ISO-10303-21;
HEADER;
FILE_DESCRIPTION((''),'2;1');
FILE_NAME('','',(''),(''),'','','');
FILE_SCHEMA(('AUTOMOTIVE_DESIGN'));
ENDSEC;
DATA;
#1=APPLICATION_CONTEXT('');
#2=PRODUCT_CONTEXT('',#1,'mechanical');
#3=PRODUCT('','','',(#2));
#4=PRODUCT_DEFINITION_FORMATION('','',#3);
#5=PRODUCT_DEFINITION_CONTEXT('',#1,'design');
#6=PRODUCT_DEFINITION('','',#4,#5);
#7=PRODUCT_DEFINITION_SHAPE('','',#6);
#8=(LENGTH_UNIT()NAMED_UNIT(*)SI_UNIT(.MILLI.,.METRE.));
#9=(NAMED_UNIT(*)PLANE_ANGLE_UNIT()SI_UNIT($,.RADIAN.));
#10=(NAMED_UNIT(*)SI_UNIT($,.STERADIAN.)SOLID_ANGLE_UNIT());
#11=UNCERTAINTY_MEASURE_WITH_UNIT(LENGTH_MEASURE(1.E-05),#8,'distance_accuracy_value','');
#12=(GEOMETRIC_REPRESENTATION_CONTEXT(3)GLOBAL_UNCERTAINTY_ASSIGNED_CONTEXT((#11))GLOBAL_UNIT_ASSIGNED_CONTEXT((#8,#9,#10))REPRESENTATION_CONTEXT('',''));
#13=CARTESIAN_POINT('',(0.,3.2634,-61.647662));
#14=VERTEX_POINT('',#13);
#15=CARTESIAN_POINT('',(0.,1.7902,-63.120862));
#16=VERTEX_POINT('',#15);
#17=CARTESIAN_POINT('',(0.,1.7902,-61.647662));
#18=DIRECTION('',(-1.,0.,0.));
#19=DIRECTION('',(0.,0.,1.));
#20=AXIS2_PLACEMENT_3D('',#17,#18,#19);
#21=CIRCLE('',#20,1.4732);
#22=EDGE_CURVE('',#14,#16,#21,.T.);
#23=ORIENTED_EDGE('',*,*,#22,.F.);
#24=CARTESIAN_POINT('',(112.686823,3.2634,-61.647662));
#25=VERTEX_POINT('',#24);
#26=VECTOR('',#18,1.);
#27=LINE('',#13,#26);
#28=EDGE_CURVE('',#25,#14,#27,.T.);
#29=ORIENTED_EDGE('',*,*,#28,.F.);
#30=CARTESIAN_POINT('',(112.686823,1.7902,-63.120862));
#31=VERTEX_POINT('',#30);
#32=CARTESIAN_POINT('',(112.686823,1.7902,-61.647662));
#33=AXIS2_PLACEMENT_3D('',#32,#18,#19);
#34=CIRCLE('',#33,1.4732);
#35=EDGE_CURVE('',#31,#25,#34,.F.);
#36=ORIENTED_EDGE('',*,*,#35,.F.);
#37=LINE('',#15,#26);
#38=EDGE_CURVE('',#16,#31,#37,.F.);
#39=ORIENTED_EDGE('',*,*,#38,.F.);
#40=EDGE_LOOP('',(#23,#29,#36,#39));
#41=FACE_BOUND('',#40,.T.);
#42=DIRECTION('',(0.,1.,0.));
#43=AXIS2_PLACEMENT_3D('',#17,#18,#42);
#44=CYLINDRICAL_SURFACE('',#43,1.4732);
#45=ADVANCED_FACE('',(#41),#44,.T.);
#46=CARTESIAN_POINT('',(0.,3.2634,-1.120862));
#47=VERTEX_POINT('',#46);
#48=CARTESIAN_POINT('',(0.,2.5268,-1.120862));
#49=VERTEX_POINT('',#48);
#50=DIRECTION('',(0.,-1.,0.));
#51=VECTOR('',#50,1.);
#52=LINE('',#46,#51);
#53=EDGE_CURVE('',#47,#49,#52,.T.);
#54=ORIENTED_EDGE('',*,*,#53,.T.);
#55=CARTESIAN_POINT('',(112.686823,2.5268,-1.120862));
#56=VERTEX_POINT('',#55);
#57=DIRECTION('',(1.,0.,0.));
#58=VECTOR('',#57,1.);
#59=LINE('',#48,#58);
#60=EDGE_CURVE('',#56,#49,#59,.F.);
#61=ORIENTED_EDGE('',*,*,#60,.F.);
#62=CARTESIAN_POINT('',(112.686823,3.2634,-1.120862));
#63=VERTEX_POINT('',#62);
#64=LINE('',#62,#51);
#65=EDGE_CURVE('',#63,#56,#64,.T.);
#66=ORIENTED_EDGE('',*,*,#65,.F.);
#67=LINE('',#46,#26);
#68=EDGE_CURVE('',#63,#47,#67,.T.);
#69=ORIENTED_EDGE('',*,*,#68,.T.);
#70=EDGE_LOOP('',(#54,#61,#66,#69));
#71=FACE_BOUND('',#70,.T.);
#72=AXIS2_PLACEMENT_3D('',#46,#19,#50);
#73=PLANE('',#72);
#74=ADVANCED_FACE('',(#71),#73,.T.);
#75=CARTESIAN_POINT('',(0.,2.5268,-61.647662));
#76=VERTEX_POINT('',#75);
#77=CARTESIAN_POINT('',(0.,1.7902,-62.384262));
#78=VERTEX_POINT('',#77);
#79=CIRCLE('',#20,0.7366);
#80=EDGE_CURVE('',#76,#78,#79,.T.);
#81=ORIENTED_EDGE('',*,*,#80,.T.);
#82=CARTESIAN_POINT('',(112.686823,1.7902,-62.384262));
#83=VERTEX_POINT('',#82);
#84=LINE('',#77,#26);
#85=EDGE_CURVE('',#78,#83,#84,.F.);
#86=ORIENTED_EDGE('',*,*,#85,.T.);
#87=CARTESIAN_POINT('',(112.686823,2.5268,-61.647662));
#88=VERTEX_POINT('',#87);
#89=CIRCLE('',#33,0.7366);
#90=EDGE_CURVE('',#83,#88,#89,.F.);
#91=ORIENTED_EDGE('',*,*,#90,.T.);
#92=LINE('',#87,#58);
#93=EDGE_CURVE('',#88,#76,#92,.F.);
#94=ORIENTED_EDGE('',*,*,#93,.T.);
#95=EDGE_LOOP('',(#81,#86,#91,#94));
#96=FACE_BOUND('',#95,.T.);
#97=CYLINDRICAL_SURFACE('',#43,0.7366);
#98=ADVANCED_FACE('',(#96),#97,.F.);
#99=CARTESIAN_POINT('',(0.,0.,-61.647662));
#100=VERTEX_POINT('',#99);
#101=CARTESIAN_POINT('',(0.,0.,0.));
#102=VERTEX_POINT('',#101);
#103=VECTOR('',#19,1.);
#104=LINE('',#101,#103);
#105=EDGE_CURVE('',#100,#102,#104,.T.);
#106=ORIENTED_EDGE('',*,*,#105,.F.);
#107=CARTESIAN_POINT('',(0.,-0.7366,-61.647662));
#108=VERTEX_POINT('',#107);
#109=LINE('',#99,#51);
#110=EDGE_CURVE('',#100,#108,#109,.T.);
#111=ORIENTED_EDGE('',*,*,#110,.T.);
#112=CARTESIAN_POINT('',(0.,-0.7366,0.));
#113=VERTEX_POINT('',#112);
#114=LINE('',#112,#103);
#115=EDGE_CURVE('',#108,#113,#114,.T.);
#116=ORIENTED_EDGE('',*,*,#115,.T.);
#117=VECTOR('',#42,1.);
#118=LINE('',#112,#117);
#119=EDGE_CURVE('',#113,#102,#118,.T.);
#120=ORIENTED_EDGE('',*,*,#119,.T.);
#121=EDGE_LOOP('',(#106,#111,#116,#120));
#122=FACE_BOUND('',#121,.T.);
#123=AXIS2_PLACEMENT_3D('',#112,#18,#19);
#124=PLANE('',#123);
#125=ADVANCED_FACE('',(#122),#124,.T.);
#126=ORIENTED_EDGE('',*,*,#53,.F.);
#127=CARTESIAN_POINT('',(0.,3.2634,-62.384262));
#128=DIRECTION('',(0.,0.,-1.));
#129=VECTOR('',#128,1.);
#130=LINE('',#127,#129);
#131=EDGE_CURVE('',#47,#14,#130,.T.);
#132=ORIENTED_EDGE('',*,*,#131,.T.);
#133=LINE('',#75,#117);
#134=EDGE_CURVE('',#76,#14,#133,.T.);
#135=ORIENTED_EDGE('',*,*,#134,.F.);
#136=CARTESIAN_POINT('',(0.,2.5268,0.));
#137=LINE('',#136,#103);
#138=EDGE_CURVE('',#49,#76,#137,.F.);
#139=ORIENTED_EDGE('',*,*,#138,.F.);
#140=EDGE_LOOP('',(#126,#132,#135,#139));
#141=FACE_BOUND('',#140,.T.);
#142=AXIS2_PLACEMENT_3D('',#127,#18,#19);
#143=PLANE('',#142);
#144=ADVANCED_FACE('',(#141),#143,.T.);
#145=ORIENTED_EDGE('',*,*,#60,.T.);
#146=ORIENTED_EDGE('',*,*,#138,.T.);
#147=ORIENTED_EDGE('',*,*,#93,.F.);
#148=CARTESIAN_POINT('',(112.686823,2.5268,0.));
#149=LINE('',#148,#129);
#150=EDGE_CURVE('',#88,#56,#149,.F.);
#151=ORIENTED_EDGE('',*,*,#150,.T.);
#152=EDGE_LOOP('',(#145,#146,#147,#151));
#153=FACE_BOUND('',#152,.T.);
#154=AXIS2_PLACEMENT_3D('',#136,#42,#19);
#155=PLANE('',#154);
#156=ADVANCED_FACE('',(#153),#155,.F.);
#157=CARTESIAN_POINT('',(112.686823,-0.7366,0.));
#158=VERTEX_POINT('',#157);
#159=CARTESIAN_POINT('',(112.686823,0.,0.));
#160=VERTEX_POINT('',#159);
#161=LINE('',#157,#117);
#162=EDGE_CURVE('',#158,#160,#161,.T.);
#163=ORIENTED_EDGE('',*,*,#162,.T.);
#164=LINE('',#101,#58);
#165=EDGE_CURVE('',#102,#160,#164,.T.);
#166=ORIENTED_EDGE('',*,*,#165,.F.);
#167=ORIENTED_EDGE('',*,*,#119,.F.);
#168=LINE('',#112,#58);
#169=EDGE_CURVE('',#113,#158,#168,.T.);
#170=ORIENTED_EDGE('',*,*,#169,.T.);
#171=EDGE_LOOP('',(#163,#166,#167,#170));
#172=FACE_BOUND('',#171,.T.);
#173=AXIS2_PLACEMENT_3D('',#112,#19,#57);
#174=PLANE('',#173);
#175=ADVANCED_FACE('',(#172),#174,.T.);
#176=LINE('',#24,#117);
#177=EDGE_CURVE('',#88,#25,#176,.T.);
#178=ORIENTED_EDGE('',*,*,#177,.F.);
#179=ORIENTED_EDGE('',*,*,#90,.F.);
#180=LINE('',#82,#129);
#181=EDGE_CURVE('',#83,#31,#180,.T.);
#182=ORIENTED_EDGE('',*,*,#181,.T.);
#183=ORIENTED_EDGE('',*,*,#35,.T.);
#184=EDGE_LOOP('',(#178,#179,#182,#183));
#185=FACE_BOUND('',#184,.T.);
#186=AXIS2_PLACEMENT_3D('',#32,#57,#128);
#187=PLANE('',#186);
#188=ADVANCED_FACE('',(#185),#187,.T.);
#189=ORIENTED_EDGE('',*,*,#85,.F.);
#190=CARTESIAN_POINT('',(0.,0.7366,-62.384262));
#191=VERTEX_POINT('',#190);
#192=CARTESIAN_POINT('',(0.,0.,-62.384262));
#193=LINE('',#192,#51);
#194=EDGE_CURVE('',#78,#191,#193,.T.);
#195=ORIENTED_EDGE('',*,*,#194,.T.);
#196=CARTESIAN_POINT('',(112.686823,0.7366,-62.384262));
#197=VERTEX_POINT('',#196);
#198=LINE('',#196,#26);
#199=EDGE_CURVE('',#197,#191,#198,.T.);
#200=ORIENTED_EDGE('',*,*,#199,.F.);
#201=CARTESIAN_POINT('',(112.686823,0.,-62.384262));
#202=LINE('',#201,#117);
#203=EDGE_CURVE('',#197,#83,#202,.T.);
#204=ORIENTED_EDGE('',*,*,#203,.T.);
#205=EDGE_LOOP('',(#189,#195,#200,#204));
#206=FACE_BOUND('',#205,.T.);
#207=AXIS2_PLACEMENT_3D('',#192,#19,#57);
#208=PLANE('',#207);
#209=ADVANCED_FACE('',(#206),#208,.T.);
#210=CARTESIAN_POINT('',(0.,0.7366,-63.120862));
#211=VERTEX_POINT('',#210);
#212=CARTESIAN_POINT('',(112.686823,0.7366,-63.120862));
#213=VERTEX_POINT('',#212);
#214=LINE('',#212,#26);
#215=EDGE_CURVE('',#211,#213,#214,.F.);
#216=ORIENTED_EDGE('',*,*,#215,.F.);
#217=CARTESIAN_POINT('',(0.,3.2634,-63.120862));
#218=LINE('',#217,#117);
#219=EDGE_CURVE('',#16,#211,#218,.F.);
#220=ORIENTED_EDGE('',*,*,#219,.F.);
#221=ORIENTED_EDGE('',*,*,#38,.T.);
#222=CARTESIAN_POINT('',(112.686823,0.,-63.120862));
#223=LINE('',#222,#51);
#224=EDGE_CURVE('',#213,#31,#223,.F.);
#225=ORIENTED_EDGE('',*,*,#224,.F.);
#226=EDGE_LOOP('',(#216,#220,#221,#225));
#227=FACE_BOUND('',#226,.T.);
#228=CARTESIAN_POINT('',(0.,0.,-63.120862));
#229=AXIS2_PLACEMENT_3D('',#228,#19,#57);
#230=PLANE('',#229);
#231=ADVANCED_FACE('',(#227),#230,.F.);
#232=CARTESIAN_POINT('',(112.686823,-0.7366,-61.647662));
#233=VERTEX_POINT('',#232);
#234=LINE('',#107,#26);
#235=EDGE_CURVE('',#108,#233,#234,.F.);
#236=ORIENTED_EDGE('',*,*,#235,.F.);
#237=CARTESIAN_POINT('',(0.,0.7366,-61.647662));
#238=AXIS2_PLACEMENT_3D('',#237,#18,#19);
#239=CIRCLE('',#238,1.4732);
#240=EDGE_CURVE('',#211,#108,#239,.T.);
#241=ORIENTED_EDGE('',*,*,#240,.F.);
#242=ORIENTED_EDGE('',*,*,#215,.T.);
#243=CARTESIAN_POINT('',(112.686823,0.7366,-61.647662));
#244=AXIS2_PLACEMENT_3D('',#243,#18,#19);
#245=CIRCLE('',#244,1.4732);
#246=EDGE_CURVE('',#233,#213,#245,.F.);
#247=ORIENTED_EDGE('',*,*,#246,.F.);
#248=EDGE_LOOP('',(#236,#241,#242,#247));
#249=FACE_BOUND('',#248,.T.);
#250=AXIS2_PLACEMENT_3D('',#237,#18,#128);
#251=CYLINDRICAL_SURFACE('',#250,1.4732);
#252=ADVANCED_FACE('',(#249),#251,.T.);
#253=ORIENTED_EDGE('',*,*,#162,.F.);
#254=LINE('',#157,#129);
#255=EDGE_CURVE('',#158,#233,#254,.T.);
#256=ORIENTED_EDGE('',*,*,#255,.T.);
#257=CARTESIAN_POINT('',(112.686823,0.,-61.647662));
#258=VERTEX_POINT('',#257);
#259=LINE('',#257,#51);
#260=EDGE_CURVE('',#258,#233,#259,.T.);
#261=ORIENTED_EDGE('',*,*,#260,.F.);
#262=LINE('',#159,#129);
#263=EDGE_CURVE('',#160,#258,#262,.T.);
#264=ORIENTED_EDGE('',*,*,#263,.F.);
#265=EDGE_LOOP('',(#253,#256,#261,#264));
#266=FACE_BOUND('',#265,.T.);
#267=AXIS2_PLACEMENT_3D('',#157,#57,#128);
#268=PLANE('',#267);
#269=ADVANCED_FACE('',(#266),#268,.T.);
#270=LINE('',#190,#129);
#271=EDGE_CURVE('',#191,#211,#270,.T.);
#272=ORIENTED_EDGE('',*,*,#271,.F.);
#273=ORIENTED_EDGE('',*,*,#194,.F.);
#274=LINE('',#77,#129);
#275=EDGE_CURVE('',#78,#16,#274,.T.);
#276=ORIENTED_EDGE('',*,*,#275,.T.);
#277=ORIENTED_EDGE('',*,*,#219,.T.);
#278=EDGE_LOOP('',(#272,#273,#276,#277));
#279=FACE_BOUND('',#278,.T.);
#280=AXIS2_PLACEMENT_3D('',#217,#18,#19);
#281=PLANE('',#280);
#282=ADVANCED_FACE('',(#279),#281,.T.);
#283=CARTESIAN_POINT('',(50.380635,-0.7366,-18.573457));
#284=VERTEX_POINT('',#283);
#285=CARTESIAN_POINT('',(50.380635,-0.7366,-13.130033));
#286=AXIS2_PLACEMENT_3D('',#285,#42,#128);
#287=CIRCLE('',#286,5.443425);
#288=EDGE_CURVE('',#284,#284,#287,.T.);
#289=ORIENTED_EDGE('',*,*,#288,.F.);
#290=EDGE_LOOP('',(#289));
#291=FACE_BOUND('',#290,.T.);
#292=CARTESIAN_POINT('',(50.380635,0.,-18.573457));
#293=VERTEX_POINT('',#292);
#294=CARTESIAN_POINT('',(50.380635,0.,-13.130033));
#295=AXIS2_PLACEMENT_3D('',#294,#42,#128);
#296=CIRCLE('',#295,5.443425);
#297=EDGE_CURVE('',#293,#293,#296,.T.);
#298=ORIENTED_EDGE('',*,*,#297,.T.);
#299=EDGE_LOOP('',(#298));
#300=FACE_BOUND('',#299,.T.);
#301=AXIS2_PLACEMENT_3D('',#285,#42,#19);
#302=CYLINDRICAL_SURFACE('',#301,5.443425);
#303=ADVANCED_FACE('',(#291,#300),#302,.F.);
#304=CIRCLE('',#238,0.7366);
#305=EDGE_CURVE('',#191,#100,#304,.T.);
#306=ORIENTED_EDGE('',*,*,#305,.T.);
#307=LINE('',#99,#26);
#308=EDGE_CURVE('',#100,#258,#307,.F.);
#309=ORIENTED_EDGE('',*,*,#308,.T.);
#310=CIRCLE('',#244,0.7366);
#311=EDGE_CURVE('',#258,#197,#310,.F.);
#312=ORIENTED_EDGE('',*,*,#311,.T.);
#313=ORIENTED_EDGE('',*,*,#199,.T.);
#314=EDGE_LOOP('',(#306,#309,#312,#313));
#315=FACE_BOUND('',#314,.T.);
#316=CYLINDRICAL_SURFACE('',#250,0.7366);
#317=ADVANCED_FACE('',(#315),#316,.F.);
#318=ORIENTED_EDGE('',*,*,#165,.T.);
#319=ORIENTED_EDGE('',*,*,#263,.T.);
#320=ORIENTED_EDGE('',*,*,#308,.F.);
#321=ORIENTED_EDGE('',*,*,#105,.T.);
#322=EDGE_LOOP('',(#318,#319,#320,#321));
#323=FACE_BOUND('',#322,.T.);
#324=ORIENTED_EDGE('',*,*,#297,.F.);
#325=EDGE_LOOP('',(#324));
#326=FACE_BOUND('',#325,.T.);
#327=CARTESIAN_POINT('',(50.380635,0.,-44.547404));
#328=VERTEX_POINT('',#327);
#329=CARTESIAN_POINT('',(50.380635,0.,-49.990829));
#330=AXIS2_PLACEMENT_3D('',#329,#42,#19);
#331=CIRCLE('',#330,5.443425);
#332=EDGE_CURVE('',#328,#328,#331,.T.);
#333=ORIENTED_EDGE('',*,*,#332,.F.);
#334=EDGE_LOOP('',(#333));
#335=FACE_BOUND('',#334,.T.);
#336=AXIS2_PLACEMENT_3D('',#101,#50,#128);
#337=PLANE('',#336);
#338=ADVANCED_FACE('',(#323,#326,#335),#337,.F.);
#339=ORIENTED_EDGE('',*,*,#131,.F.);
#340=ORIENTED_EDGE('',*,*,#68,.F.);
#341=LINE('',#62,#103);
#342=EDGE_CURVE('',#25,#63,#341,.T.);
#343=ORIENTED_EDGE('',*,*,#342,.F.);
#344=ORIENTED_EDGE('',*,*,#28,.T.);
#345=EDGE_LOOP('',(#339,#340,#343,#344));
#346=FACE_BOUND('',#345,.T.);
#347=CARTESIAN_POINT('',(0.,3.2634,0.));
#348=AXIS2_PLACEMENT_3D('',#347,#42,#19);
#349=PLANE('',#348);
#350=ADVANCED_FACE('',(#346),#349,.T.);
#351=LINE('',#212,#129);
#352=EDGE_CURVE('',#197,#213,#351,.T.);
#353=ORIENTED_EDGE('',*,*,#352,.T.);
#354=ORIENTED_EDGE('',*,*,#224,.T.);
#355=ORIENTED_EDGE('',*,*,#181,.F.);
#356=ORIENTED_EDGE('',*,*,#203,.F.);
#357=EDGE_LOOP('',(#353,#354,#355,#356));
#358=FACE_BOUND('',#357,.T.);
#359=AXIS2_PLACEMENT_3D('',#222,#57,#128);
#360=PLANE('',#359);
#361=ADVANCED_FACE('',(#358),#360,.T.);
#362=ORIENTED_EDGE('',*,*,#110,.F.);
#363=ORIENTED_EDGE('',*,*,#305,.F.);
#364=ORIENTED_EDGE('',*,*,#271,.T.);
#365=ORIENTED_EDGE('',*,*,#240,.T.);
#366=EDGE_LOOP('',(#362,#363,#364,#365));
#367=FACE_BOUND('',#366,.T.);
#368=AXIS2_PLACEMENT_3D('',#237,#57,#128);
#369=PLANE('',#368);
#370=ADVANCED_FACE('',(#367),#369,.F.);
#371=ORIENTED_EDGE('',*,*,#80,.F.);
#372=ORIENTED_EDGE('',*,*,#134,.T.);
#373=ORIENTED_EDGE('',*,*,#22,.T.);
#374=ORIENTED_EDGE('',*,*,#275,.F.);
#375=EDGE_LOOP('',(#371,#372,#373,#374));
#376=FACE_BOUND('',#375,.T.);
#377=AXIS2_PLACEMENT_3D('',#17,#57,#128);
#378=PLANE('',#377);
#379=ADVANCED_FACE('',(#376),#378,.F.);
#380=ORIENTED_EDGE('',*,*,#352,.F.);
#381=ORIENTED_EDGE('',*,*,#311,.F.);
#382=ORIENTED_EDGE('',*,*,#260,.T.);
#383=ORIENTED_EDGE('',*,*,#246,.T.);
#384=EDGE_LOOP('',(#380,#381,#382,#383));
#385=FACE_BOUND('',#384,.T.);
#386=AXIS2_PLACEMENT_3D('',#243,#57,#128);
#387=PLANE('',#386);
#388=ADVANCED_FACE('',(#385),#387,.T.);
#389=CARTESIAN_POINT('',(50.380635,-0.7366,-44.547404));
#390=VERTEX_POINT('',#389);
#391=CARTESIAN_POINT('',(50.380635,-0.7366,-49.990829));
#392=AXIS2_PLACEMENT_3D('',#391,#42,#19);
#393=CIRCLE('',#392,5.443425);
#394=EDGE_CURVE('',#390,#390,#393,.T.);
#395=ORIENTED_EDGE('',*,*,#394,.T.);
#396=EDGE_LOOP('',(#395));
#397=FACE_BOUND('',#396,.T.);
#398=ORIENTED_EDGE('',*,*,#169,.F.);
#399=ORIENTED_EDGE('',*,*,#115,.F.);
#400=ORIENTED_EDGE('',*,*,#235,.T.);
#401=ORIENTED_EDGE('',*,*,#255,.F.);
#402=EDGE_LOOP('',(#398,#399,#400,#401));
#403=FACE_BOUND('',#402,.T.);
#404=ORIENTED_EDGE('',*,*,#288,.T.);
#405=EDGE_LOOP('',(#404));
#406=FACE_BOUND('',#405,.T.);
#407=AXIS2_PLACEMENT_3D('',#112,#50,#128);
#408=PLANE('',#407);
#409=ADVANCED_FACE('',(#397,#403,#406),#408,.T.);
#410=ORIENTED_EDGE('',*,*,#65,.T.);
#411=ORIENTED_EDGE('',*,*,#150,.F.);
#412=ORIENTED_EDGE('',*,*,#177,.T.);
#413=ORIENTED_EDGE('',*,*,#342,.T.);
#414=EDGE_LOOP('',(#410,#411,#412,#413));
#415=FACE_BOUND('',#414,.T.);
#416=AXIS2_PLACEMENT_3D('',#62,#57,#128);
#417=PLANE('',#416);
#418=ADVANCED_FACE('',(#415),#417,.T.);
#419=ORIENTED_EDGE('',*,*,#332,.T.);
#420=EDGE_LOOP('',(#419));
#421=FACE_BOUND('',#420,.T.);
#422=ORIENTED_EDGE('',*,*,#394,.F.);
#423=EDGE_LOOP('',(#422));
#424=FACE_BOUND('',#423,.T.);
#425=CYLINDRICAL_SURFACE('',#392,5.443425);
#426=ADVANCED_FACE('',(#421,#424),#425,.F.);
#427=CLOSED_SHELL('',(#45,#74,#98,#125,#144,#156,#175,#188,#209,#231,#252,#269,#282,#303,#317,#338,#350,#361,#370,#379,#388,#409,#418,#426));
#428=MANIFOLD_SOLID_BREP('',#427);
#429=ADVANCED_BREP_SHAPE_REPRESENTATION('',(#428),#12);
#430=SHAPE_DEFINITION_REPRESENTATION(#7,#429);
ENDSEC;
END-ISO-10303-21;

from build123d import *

# Parameters (mm, degrees)
SKETCH1_W                    = 112.686822752
SKETCH1_H                    = 63.120861651
SKETCH1_R                    = 5.443424695
BASE_FLANGE1_DEPTH           = 0.7366
EDGE_FLANGE1_STRIP_W         = 4.4196
EDGE_FLANGE1_STRIP_H         = 0.7366
EDGE_FLANGE1_STRIP_CUT_DEPTH = 112.686822752
EDGE_FLANGE1_DEPTH           = 112.686822752
EDGE_FLANGE2_STRIP_W         = 4.4196
EDGE_FLANGE2_STRIP_H         = 0.7366
EDGE_FLANGE2_STRIP_CUT_DEPTH = 112.686822752
EDGE_FLANGE2_DEPTH           = 112.686822752


# Sheet-metal steps are written as plain solids
with BuildPart() as part:
    # Sketch1 → Base-Flange1 (new body)
    with BuildSketch(Plane(origin=(0, 0, 0), x_dir=(1, 0, 0), z_dir=(0, 1, 0))):
        with Locations((56.343411376, 31.560430826)):
            Rectangle(SKETCH1_W, SKETCH1_H)
        with Locations(Location((50.380635498, 49.990828995, 0), (0, 0, 270))):
            Circle(SKETCH1_R, mode=Mode.SUBTRACT)
        with Locations(Location((50.380635498, 13.130032656, 0), (0, 0, 90))):
            Circle(SKETCH1_R, mode=Mode.SUBTRACT)
    extrude(amount=-BASE_FLANGE1_DEPTH)

    # Edge-Flange1 strip (across the edge) → Edge-Flange1 strip cut (cut)
    with BuildSketch(Plane(origin=(112.686822752, 0, -63.120861651), x_dir=(0, 0, 1), z_dir=(-1, 0, 0))):
        with Locations((-0.7366, -0.3683)):
            Rectangle(EDGE_FLANGE1_STRIP_W, EDGE_FLANGE1_STRIP_H)
    extrude(amount=EDGE_FLANGE1_STRIP_CUT_DEPTH, mode=Mode.SUBTRACT)

    # Edge-Flange1 section (across the edge) → Edge-Flange1 (add)
    with BuildSketch(Plane(origin=(112.686822752, 0, -63.120861651), x_dir=(0, 0, 1), z_dir=(-1, 0, 0))):
        with BuildLine():
            Line((0, 0.7366), (0, 3.2634))
            Line((0, 3.2634), (0.7366, 3.2634))
            Line((0.7366, 3.2634), (0.7366, 0.7366))
            ThreePointArc((0.7366, 0.7366), (0.952345145, 0.215745145), (1.4732, 0))
            Line((1.4732, 0), (1.4732, -0.7366))
            ThreePointArc((1.4732, -0.7366), (0.43149029, -0.30510971), (0, 0.7366))
        make_face()
    extrude(amount=EDGE_FLANGE1_DEPTH)

    # Edge-Flange2 strip (across the edge) → Edge-Flange2 strip cut (cut)
    with BuildSketch(Plane(origin=(112.686822752, 3.2634, -62.384261651), x_dir=(0, -1, 0), z_dir=(-1, 0, 0))):
        with Locations((-0.7366, -0.3683)):
            Rectangle(EDGE_FLANGE2_STRIP_W, EDGE_FLANGE2_STRIP_H)
    extrude(amount=EDGE_FLANGE2_STRIP_CUT_DEPTH, mode=Mode.SUBTRACT)

    # Edge-Flange2 section (across the edge) → Edge-Flange2 (add)
    with BuildSketch(Plane(origin=(112.686822752, 3.2634, -62.384261651), x_dir=(0, -1, 0), z_dir=(-1, 0, 0))):
        with BuildLine():
            Line((0, 0.7366), (0, 61.2634))
            Line((0, 61.2634), (0.7366, 61.2634))
            Line((0.7366, 61.2634), (0.7366, 0.7366))
            ThreePointArc((0.7366, 0.7366), (0.952345145, 0.215745145), (1.4732, 0))
            Line((1.4732, 0), (1.4732, -0.7366))
            ThreePointArc((1.4732, -0.7366), (0.43149029, -0.30510971), (0, 0.7366))
        make_face()
    extrude(amount=EDGE_FLANGE2_DEPTH)


solid = part.part
